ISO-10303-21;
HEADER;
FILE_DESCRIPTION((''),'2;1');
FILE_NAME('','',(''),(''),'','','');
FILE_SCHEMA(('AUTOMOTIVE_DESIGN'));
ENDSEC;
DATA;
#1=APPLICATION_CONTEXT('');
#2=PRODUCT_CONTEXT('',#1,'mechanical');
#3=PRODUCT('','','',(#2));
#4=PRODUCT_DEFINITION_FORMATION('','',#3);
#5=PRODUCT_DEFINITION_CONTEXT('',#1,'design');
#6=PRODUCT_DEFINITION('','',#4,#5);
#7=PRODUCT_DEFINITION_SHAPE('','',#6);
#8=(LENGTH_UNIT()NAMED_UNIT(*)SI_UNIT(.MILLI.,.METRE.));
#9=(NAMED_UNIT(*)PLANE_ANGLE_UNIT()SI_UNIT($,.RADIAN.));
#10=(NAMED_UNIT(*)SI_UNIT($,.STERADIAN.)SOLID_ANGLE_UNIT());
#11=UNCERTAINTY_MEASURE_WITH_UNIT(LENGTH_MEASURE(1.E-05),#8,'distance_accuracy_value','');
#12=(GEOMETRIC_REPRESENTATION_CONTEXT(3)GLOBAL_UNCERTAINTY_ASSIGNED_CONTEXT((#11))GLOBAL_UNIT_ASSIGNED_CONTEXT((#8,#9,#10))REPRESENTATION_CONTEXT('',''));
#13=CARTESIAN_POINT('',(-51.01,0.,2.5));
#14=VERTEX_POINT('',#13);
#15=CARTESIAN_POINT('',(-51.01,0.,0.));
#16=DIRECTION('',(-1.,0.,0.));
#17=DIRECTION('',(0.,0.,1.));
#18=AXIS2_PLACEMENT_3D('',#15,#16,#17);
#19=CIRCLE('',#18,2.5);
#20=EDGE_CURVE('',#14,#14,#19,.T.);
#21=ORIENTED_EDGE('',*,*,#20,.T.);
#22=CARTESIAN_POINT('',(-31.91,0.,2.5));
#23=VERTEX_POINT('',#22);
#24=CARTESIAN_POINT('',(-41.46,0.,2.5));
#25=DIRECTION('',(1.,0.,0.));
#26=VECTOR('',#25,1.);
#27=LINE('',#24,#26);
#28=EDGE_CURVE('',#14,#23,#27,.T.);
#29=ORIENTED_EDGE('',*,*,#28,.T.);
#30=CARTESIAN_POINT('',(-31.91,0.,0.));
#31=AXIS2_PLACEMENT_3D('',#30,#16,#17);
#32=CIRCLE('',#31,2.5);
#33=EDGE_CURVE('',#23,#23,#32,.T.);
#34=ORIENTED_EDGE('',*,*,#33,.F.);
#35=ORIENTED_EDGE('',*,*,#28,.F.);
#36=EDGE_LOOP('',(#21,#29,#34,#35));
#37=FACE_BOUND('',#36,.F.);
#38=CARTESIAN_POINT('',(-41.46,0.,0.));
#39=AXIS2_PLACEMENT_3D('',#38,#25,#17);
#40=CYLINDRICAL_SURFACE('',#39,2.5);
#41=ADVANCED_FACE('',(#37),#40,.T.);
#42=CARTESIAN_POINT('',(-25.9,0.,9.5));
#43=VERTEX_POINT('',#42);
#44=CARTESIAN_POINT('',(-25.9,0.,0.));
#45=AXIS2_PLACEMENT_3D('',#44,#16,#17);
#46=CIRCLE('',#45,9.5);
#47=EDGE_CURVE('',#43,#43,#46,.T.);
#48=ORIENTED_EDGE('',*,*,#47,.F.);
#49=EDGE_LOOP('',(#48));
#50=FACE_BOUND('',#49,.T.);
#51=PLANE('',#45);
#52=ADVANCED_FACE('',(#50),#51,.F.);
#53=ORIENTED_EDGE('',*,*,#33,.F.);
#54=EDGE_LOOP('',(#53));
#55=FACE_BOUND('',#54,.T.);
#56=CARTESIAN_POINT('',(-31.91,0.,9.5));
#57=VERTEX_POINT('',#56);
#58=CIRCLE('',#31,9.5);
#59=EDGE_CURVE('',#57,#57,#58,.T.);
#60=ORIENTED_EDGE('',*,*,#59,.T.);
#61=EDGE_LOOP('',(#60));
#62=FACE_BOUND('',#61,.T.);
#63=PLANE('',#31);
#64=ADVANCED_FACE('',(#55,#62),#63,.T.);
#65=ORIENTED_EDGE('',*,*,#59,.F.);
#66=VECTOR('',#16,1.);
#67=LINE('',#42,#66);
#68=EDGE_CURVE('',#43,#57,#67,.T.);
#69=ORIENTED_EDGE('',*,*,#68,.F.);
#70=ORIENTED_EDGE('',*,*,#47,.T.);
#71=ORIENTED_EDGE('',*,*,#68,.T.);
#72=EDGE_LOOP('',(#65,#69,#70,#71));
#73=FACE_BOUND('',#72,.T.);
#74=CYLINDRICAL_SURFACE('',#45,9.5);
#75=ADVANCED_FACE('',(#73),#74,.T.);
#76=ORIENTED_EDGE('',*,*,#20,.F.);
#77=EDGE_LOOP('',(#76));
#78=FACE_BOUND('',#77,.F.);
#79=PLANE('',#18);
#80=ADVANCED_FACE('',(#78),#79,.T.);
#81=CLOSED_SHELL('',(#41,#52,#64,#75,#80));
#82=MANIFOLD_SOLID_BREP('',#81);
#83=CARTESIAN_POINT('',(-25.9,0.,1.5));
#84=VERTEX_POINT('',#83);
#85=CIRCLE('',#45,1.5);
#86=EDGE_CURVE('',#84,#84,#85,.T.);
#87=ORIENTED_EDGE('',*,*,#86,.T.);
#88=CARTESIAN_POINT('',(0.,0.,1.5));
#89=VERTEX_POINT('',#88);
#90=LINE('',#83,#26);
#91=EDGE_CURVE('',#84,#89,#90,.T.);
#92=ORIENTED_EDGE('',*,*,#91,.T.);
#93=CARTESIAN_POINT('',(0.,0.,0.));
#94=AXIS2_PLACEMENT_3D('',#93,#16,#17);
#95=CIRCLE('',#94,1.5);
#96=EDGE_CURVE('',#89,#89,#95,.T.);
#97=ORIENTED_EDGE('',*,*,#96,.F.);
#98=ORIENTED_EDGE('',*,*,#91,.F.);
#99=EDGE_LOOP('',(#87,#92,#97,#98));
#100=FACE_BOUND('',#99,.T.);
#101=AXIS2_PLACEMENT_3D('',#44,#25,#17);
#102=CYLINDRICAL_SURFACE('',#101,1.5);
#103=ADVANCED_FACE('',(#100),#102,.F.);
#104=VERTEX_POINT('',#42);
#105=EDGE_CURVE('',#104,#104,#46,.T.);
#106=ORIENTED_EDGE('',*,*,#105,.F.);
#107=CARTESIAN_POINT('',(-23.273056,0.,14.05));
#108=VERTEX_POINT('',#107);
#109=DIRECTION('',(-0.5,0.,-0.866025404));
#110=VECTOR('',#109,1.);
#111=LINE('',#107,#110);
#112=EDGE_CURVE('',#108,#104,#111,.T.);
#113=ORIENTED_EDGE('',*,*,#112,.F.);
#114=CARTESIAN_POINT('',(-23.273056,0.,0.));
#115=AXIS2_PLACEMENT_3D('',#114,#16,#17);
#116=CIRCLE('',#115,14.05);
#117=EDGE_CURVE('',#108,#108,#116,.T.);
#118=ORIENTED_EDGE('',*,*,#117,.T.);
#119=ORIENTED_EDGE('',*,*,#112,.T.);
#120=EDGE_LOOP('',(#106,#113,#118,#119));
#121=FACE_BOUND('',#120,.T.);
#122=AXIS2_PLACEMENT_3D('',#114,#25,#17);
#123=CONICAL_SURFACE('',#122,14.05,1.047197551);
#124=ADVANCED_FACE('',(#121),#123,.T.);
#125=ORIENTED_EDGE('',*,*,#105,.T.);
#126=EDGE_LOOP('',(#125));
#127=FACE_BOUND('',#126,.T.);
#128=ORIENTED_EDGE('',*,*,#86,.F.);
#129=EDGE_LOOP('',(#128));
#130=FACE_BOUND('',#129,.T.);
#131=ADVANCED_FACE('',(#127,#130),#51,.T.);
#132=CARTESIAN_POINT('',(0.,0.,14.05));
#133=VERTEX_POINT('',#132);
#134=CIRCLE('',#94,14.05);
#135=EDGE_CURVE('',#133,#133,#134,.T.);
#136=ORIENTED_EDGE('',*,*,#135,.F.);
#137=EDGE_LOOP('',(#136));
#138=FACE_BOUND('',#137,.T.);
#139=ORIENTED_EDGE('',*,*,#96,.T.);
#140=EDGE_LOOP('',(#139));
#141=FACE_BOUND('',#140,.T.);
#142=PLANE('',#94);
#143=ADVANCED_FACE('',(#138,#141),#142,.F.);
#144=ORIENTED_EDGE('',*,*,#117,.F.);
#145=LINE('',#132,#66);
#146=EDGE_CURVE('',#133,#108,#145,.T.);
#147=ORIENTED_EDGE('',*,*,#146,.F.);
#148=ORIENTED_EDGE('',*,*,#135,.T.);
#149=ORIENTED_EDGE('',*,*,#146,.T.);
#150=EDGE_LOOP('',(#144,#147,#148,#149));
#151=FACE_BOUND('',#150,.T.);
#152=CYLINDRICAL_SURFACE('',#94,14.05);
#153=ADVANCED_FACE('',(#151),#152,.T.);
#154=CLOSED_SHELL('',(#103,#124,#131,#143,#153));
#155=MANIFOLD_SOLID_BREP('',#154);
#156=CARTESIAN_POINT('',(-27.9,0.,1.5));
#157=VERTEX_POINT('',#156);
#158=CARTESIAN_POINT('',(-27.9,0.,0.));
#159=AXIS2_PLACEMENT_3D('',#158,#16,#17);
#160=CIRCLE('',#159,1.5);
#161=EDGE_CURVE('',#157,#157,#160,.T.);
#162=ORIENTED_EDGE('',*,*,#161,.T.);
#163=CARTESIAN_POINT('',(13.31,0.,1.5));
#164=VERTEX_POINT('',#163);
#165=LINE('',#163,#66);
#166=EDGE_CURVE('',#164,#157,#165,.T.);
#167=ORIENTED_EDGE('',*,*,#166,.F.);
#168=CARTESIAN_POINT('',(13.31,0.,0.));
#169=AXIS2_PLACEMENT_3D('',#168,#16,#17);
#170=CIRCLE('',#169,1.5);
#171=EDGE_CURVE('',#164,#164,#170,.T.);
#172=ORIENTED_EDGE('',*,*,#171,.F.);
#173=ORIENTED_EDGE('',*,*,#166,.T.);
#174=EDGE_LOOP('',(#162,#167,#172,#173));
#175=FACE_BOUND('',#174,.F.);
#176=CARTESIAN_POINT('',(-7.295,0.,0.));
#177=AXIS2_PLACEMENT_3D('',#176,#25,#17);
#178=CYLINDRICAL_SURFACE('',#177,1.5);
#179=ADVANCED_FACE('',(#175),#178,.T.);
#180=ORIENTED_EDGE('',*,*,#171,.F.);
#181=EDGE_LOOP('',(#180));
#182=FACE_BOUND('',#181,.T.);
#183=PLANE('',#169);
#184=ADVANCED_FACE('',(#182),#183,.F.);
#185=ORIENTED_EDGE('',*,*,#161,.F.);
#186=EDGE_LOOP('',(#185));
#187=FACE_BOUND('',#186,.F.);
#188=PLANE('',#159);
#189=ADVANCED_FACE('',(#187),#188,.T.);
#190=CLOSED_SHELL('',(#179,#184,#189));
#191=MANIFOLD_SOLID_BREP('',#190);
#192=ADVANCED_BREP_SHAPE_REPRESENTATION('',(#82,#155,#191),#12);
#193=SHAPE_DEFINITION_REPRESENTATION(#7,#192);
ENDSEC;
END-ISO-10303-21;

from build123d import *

# Parameters (mm, degrees)
F1_W = 13.31
F1_H = 1.5
F2_W = 41.21
F2_H = 1.5
F3_W = 19.1
F3_H = 2.5


with BuildPart() as f4:
    # F1 (on Front) → F4 (revolve)
    with BuildSketch(Plane.XZ):
        with Locations((6.655, 0.75)):
            Rectangle(F1_W, F1_H)
    revolve(axis=Axis((-18.85, 0, 0), (-1, 0, 0)))

    # F2 (on Front) → F5 (revolve)
    with BuildSketch(Plane.XZ):
        with Locations((-7.295, 0.75)):
            Rectangle(F2_W, F2_H)
    revolve(axis=Axis((-18.85, 0, 0), (-1, 0, 0)))


with BuildPart() as f4b:
    # F1 (on Front) → F4, piece 2 (revolve)
    with BuildSketch(Plane.XZ):
        Polygon((0, 14.05), (-23.2730562752, 14.05), (-25.9, 9.5), (-25.9, 1.5), (0, 1.5), align=None)
    revolve(axis=Axis((-18.85, 0, 0), (-1, 0, 0)))


with BuildPart() as f6:
    # F3 (on Front) → F6 (revolve)
    with BuildSketch(Plane.XZ):
        with Locations((-41.46, 1.25)):
            Rectangle(F3_W, F3_H)
        Polygon((-25.9, 9.5), (-31.91, 9.5), (-31.91, 2.5), (-31.91, 0), (-25.9, 0), align=None)
    revolve(axis=Axis((-18.85, 0, 0), (-1, 0, 0)))


solid = Compound([f4.part, f4b.part, f6.part])
